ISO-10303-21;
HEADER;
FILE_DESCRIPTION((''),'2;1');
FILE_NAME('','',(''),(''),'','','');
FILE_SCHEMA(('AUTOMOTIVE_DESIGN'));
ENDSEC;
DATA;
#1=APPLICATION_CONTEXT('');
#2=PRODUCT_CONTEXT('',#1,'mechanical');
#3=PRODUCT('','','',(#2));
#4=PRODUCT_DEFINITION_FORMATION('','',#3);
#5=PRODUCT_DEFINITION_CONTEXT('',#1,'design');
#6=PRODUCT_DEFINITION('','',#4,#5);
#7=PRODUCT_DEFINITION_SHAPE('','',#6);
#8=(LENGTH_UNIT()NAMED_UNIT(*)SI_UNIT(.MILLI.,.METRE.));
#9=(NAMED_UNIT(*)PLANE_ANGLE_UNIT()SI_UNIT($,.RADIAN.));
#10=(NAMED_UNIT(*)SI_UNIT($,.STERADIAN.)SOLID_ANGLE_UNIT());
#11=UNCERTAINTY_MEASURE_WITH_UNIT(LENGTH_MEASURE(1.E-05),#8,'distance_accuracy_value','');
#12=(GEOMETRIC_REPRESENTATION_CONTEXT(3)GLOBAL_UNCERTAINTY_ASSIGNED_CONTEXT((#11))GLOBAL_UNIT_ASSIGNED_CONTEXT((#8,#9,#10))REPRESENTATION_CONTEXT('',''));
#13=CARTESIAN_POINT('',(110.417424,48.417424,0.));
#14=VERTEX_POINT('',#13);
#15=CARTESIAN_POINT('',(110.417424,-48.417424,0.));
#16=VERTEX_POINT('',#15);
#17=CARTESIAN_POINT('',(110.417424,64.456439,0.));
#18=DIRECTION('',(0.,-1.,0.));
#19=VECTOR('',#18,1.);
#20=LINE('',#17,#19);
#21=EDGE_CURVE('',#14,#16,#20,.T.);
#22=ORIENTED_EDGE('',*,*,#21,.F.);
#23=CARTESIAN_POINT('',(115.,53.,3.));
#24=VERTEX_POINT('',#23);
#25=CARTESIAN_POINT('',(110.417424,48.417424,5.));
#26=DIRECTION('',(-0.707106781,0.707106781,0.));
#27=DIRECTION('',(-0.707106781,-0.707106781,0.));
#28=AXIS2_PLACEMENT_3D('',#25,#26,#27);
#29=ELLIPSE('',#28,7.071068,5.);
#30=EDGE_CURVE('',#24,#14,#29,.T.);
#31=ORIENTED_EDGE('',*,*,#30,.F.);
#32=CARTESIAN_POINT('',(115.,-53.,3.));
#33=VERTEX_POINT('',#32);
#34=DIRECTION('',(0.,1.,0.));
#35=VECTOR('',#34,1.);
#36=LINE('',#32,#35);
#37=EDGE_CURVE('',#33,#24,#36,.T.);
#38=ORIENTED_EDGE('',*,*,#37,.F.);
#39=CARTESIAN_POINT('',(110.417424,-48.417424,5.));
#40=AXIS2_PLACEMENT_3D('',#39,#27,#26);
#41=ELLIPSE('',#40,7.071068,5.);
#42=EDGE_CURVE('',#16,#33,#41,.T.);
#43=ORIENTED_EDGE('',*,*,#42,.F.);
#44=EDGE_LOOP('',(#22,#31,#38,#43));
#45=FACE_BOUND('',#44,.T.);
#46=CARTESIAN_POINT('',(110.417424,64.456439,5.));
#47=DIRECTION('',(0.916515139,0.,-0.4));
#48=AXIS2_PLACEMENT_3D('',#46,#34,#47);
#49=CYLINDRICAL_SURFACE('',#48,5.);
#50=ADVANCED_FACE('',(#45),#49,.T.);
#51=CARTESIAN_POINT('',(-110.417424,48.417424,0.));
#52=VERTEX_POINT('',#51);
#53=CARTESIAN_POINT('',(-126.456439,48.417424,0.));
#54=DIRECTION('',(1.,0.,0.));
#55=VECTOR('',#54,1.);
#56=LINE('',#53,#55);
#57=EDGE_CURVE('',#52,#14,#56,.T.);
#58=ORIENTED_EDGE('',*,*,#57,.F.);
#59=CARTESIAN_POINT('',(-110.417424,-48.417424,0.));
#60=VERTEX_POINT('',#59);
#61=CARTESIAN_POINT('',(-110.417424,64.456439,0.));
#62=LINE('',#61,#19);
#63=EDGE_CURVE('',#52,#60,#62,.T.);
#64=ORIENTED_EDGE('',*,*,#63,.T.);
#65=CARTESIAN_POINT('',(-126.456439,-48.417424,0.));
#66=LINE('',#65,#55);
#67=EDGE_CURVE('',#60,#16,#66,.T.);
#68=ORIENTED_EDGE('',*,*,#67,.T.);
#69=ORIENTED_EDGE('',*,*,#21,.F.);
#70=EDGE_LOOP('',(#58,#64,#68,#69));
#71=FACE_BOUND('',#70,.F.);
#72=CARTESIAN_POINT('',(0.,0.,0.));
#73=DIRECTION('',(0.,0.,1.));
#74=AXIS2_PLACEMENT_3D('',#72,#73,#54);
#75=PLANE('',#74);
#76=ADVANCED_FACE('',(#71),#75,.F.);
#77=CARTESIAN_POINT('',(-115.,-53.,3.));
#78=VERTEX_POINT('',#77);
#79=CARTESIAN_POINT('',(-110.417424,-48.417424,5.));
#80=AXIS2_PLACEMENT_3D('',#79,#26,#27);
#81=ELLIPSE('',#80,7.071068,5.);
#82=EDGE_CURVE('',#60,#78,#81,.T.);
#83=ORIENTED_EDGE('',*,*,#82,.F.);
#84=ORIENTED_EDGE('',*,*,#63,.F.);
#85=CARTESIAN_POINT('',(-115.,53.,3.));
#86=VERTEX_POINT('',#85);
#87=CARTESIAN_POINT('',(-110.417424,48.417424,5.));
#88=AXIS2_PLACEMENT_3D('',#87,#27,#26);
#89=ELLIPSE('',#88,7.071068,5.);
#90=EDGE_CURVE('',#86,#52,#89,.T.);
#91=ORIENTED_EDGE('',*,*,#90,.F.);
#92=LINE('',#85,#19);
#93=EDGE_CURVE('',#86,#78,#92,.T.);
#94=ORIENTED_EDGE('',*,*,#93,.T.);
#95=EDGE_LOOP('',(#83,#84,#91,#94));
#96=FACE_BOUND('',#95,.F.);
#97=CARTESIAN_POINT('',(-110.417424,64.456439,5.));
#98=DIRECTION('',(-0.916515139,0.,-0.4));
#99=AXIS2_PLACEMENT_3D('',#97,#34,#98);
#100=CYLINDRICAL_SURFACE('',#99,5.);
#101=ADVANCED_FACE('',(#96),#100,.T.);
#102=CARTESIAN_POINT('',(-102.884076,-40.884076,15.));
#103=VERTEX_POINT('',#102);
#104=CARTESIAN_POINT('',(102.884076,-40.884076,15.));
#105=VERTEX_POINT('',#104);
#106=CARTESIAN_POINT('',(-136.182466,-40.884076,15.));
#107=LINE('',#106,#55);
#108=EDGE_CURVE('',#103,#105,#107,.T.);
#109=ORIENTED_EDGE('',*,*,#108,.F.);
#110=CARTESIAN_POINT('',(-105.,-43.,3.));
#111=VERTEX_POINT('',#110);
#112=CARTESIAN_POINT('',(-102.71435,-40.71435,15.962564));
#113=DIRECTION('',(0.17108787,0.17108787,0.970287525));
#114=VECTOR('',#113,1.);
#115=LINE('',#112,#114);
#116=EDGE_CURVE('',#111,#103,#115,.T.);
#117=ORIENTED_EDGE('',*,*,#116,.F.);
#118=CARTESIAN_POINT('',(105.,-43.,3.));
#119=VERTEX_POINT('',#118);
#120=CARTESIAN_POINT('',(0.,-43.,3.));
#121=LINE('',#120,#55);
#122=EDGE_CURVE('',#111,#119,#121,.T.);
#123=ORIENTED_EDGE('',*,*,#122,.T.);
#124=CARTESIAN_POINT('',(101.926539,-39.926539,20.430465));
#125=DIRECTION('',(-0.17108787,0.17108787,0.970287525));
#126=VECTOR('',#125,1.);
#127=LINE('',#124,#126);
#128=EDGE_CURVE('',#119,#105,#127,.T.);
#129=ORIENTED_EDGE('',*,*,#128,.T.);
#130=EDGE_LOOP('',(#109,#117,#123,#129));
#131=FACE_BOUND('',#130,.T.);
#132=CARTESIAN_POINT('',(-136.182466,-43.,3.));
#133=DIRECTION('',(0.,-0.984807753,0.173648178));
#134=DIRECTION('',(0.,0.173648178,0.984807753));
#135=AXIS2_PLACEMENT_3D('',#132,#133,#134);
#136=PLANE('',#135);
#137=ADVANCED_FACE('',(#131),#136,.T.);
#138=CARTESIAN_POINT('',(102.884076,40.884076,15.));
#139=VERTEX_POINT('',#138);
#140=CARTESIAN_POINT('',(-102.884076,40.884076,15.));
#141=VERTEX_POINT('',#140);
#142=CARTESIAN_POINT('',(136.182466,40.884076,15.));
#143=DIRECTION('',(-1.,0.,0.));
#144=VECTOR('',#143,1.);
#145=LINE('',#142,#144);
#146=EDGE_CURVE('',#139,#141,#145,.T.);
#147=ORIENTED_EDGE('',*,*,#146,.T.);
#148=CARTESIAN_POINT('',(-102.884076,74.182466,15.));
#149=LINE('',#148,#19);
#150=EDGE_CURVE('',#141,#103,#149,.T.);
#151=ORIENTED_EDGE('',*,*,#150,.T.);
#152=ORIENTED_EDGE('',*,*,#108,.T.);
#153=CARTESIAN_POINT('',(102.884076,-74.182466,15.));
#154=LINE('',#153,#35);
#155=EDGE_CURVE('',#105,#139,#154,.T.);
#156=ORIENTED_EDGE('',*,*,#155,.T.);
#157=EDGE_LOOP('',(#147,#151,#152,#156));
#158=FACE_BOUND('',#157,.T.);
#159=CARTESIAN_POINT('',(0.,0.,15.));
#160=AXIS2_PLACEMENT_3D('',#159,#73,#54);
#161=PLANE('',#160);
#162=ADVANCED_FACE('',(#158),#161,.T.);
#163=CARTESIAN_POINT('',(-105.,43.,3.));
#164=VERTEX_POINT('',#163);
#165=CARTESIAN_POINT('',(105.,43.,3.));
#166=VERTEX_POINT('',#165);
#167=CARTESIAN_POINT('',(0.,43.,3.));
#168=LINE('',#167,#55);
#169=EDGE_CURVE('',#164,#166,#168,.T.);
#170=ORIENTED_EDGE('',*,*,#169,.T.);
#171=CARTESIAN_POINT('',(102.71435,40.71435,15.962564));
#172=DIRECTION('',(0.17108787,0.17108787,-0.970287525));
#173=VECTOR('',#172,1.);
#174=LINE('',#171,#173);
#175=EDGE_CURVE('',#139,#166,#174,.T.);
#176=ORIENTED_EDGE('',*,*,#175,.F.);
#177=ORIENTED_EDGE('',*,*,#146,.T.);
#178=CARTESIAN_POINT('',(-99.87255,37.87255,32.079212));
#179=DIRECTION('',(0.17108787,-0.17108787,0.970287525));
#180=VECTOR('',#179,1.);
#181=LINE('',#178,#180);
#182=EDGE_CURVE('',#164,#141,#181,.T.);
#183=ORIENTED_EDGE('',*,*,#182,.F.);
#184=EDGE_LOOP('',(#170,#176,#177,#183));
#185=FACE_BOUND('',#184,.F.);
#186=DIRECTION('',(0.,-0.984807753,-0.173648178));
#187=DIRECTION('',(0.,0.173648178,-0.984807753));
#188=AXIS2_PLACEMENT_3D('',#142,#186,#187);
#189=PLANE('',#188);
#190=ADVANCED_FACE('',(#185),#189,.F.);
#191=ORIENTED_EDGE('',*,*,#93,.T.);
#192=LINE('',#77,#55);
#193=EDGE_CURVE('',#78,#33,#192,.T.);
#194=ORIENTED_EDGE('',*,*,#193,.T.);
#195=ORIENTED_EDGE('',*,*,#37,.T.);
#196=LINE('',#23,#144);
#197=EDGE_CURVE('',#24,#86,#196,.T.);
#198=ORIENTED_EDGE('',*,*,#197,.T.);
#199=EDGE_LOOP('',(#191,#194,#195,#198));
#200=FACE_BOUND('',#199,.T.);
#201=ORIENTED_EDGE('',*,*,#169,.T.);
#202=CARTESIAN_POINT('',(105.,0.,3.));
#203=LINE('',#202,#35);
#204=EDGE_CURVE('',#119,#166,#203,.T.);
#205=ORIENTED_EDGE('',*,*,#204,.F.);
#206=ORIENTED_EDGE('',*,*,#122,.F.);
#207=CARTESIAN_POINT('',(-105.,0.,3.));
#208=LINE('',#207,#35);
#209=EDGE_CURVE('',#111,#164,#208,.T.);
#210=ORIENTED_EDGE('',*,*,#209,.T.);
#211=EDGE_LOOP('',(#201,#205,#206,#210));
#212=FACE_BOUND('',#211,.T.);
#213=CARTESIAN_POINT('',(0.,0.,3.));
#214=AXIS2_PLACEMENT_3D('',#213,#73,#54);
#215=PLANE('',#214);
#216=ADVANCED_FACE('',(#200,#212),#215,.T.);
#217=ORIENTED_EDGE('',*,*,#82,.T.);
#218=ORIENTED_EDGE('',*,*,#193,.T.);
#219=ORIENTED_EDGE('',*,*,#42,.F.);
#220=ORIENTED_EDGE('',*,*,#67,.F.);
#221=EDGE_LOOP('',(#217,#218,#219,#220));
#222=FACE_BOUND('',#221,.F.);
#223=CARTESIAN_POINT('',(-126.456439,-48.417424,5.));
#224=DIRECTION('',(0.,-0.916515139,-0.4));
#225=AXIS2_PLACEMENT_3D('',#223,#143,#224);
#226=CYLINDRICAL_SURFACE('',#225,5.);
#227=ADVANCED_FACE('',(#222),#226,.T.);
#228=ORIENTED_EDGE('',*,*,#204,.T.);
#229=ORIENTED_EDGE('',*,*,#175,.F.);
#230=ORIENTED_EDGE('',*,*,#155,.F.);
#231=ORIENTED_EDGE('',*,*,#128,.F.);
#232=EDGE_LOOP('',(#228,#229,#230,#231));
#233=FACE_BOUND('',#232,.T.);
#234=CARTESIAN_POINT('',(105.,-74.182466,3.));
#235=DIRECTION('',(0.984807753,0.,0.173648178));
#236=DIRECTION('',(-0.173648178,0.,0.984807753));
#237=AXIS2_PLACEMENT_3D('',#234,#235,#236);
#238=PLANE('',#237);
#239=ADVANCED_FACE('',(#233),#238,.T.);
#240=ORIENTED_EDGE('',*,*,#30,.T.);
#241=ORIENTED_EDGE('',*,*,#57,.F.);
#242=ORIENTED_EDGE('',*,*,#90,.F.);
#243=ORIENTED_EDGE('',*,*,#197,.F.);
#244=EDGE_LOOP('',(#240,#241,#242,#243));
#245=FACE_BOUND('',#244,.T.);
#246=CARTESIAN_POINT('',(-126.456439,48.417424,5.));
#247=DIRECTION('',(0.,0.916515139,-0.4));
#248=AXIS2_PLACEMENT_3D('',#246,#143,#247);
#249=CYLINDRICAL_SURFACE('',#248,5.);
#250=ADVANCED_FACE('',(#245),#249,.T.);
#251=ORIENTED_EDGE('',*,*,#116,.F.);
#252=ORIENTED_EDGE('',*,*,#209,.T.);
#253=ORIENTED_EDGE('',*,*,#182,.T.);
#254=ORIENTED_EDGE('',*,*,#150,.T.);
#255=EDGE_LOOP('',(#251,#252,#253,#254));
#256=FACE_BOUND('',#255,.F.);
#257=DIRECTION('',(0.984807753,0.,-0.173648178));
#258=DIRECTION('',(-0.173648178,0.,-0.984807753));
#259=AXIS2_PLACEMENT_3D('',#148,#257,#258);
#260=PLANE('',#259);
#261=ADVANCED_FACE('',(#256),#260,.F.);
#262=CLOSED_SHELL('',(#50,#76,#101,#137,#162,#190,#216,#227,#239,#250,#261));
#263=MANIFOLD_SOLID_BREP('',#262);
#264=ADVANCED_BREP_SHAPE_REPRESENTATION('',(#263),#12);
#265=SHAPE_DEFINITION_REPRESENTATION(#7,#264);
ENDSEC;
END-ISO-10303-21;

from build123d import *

# Parameters (mm, degrees)
F0_W         = 210
F0_H         = 86
F1_DEPTH     = 15
F0_W_2       = 230
F0_H_2       = 106
F2_DEPTH     = 3
F3_T1_DEPTH  = 252.9128784748
F3_T3_DEPTH  = 128.9128784748
F4_T4_DEPTH  = 272.3649311141
F4_T9_DEPTH  = 148.3649311141
F4_T14_DEPTH = 272.3649311141
F4_T19_DEPTH = 148.3649311141


# Not quite as in the source:
# - a fillet or chamfer that OpenCascade refuses, or shapes differently, is made with other operations: its cross-section is extruded or revolved along the edge and cut away or added


with BuildPart() as f1:
    # F0 (on Top) → F1 (new body)
    with BuildSketch(Plane.XY):
        Rectangle(F0_W, F0_H)
    extrude(amount=F1_DEPTH)

    # F0 (on Top) → F2 (join)
    with BuildSketch(Plane.XY):
        Rectangle(F0_W_2, F0_H_2)
        Rectangle(F0_W, F0_H, mode=Mode.SUBTRACT)
    extrude(amount=F2_DEPTH)

    # F3: fillet of radius 5 on 4 edges, made by hand

    # F3_s2 → F3_t1 (cut)
    with BuildSketch(Plane.YZ.offset(-126.4564392374)):
        with BuildLine():
            ThreePointArc((-53, 3), (-51.1560370926, 0.8166998673), (-48.417424305, 0))
            Line((-48.417424305, 0), (-53, 0))
            Line((-53, 0), (-53, 3))
        make_face()
        with BuildLine():
            ThreePointArc((53, 3), (51.1560370926, 0.8166998673), (48.417424305, 0))
            Line((48.417424305, 0), (53, 0))
            Line((53, 0), (53, 3))
        make_face()
    extrude(amount=F3_T1_DEPTH, mode=Mode.SUBTRACT)

    # F3_s4 → F3_t3 (cut)
    with BuildSketch(Plane.XZ.offset(-64.4564392374)):
        with BuildLine():
            ThreePointArc((115, 3), (113.1560370926, 0.8166998673), (110.417424305, 0))
            Line((110.417424305, 0), (115, 0))
            Line((115, 0), (115, 3))
        make_face()
        with BuildLine():
            ThreePointArc((-115, 3), (-113.1560370926, 0.8166998673), (-110.417424305, 0))
            Line((-110.417424305, 0), (-115, 0))
            Line((-115, 0), (-115, 3))
        make_face()
    extrude(amount=F3_T3_DEPTH, mode=Mode.SUBTRACT)

    # F4: chamfer of 12 x 2.1159237685 on 4 edges, made by hand


with BuildPart() as f4_tool2:
    # F4_s3 → F4_t4 (new body)
    with BuildSketch(Plane.YZ.offset(-136.1824655571)):
        Polygon((-43, 3), (-40.8840762315, 15), (-43, 15), align=None)
    extrude(amount=F4_T4_DEPTH)

    split(bisect_by=Plane.XY.offset(3), keep=Keep.TOP)


with BuildPart() as f1_1:
    add(f1.part)

    # F4_t1: cut F4_tool2
    add(f4_tool2.part, mode=Mode.SUBTRACT)


with BuildPart() as f4_tool7:
    # F4_s8 → F4_t9 (new body)
    with BuildSketch(Plane.XZ.offset(74.1824655571)):
        Polygon((105, 3), (102.8840762315, 15), (105, 15), align=None)
    extrude(amount=-F4_T9_DEPTH)

    split(bisect_by=Plane.XY.offset(3), keep=Keep.TOP)


with BuildPart() as f1_2:
    add(f1_1.part)

    # F4_t6: cut F4_tool7
    add(f4_tool7.part, mode=Mode.SUBTRACT)


with BuildPart() as f4_tool12:
    # F4_s13 → F4_t14 (new body)
    with BuildSketch(Plane.YZ.offset(136.1824655571)):
        Polygon((40.8840762315, 15), (43, 3), (43, 15), align=None)
    extrude(amount=-F4_T14_DEPTH)

    split(bisect_by=Plane.XY.offset(3), keep=Keep.TOP)


with BuildPart() as f1_3:
    add(f1_2.part)

    # F4_t11: cut F4_tool12
    add(f4_tool12.part, mode=Mode.SUBTRACT)


with BuildPart() as f4_tool17:
    # F4_s18 → F4_t19 (new body)
    with BuildSketch(Plane.XZ.offset(-74.1824655571)):
        Polygon((-102.8840762315, 15), (-105, 3), (-105, 15), align=None)
    extrude(amount=F4_T19_DEPTH)

    split(bisect_by=Plane.XY.offset(3), keep=Keep.TOP)


with BuildPart() as f1_4:
    add(f1_3.part)

    # F4_t16: cut F4_tool17
    add(f4_tool17.part, mode=Mode.SUBTRACT)


solid = f1_4.part
